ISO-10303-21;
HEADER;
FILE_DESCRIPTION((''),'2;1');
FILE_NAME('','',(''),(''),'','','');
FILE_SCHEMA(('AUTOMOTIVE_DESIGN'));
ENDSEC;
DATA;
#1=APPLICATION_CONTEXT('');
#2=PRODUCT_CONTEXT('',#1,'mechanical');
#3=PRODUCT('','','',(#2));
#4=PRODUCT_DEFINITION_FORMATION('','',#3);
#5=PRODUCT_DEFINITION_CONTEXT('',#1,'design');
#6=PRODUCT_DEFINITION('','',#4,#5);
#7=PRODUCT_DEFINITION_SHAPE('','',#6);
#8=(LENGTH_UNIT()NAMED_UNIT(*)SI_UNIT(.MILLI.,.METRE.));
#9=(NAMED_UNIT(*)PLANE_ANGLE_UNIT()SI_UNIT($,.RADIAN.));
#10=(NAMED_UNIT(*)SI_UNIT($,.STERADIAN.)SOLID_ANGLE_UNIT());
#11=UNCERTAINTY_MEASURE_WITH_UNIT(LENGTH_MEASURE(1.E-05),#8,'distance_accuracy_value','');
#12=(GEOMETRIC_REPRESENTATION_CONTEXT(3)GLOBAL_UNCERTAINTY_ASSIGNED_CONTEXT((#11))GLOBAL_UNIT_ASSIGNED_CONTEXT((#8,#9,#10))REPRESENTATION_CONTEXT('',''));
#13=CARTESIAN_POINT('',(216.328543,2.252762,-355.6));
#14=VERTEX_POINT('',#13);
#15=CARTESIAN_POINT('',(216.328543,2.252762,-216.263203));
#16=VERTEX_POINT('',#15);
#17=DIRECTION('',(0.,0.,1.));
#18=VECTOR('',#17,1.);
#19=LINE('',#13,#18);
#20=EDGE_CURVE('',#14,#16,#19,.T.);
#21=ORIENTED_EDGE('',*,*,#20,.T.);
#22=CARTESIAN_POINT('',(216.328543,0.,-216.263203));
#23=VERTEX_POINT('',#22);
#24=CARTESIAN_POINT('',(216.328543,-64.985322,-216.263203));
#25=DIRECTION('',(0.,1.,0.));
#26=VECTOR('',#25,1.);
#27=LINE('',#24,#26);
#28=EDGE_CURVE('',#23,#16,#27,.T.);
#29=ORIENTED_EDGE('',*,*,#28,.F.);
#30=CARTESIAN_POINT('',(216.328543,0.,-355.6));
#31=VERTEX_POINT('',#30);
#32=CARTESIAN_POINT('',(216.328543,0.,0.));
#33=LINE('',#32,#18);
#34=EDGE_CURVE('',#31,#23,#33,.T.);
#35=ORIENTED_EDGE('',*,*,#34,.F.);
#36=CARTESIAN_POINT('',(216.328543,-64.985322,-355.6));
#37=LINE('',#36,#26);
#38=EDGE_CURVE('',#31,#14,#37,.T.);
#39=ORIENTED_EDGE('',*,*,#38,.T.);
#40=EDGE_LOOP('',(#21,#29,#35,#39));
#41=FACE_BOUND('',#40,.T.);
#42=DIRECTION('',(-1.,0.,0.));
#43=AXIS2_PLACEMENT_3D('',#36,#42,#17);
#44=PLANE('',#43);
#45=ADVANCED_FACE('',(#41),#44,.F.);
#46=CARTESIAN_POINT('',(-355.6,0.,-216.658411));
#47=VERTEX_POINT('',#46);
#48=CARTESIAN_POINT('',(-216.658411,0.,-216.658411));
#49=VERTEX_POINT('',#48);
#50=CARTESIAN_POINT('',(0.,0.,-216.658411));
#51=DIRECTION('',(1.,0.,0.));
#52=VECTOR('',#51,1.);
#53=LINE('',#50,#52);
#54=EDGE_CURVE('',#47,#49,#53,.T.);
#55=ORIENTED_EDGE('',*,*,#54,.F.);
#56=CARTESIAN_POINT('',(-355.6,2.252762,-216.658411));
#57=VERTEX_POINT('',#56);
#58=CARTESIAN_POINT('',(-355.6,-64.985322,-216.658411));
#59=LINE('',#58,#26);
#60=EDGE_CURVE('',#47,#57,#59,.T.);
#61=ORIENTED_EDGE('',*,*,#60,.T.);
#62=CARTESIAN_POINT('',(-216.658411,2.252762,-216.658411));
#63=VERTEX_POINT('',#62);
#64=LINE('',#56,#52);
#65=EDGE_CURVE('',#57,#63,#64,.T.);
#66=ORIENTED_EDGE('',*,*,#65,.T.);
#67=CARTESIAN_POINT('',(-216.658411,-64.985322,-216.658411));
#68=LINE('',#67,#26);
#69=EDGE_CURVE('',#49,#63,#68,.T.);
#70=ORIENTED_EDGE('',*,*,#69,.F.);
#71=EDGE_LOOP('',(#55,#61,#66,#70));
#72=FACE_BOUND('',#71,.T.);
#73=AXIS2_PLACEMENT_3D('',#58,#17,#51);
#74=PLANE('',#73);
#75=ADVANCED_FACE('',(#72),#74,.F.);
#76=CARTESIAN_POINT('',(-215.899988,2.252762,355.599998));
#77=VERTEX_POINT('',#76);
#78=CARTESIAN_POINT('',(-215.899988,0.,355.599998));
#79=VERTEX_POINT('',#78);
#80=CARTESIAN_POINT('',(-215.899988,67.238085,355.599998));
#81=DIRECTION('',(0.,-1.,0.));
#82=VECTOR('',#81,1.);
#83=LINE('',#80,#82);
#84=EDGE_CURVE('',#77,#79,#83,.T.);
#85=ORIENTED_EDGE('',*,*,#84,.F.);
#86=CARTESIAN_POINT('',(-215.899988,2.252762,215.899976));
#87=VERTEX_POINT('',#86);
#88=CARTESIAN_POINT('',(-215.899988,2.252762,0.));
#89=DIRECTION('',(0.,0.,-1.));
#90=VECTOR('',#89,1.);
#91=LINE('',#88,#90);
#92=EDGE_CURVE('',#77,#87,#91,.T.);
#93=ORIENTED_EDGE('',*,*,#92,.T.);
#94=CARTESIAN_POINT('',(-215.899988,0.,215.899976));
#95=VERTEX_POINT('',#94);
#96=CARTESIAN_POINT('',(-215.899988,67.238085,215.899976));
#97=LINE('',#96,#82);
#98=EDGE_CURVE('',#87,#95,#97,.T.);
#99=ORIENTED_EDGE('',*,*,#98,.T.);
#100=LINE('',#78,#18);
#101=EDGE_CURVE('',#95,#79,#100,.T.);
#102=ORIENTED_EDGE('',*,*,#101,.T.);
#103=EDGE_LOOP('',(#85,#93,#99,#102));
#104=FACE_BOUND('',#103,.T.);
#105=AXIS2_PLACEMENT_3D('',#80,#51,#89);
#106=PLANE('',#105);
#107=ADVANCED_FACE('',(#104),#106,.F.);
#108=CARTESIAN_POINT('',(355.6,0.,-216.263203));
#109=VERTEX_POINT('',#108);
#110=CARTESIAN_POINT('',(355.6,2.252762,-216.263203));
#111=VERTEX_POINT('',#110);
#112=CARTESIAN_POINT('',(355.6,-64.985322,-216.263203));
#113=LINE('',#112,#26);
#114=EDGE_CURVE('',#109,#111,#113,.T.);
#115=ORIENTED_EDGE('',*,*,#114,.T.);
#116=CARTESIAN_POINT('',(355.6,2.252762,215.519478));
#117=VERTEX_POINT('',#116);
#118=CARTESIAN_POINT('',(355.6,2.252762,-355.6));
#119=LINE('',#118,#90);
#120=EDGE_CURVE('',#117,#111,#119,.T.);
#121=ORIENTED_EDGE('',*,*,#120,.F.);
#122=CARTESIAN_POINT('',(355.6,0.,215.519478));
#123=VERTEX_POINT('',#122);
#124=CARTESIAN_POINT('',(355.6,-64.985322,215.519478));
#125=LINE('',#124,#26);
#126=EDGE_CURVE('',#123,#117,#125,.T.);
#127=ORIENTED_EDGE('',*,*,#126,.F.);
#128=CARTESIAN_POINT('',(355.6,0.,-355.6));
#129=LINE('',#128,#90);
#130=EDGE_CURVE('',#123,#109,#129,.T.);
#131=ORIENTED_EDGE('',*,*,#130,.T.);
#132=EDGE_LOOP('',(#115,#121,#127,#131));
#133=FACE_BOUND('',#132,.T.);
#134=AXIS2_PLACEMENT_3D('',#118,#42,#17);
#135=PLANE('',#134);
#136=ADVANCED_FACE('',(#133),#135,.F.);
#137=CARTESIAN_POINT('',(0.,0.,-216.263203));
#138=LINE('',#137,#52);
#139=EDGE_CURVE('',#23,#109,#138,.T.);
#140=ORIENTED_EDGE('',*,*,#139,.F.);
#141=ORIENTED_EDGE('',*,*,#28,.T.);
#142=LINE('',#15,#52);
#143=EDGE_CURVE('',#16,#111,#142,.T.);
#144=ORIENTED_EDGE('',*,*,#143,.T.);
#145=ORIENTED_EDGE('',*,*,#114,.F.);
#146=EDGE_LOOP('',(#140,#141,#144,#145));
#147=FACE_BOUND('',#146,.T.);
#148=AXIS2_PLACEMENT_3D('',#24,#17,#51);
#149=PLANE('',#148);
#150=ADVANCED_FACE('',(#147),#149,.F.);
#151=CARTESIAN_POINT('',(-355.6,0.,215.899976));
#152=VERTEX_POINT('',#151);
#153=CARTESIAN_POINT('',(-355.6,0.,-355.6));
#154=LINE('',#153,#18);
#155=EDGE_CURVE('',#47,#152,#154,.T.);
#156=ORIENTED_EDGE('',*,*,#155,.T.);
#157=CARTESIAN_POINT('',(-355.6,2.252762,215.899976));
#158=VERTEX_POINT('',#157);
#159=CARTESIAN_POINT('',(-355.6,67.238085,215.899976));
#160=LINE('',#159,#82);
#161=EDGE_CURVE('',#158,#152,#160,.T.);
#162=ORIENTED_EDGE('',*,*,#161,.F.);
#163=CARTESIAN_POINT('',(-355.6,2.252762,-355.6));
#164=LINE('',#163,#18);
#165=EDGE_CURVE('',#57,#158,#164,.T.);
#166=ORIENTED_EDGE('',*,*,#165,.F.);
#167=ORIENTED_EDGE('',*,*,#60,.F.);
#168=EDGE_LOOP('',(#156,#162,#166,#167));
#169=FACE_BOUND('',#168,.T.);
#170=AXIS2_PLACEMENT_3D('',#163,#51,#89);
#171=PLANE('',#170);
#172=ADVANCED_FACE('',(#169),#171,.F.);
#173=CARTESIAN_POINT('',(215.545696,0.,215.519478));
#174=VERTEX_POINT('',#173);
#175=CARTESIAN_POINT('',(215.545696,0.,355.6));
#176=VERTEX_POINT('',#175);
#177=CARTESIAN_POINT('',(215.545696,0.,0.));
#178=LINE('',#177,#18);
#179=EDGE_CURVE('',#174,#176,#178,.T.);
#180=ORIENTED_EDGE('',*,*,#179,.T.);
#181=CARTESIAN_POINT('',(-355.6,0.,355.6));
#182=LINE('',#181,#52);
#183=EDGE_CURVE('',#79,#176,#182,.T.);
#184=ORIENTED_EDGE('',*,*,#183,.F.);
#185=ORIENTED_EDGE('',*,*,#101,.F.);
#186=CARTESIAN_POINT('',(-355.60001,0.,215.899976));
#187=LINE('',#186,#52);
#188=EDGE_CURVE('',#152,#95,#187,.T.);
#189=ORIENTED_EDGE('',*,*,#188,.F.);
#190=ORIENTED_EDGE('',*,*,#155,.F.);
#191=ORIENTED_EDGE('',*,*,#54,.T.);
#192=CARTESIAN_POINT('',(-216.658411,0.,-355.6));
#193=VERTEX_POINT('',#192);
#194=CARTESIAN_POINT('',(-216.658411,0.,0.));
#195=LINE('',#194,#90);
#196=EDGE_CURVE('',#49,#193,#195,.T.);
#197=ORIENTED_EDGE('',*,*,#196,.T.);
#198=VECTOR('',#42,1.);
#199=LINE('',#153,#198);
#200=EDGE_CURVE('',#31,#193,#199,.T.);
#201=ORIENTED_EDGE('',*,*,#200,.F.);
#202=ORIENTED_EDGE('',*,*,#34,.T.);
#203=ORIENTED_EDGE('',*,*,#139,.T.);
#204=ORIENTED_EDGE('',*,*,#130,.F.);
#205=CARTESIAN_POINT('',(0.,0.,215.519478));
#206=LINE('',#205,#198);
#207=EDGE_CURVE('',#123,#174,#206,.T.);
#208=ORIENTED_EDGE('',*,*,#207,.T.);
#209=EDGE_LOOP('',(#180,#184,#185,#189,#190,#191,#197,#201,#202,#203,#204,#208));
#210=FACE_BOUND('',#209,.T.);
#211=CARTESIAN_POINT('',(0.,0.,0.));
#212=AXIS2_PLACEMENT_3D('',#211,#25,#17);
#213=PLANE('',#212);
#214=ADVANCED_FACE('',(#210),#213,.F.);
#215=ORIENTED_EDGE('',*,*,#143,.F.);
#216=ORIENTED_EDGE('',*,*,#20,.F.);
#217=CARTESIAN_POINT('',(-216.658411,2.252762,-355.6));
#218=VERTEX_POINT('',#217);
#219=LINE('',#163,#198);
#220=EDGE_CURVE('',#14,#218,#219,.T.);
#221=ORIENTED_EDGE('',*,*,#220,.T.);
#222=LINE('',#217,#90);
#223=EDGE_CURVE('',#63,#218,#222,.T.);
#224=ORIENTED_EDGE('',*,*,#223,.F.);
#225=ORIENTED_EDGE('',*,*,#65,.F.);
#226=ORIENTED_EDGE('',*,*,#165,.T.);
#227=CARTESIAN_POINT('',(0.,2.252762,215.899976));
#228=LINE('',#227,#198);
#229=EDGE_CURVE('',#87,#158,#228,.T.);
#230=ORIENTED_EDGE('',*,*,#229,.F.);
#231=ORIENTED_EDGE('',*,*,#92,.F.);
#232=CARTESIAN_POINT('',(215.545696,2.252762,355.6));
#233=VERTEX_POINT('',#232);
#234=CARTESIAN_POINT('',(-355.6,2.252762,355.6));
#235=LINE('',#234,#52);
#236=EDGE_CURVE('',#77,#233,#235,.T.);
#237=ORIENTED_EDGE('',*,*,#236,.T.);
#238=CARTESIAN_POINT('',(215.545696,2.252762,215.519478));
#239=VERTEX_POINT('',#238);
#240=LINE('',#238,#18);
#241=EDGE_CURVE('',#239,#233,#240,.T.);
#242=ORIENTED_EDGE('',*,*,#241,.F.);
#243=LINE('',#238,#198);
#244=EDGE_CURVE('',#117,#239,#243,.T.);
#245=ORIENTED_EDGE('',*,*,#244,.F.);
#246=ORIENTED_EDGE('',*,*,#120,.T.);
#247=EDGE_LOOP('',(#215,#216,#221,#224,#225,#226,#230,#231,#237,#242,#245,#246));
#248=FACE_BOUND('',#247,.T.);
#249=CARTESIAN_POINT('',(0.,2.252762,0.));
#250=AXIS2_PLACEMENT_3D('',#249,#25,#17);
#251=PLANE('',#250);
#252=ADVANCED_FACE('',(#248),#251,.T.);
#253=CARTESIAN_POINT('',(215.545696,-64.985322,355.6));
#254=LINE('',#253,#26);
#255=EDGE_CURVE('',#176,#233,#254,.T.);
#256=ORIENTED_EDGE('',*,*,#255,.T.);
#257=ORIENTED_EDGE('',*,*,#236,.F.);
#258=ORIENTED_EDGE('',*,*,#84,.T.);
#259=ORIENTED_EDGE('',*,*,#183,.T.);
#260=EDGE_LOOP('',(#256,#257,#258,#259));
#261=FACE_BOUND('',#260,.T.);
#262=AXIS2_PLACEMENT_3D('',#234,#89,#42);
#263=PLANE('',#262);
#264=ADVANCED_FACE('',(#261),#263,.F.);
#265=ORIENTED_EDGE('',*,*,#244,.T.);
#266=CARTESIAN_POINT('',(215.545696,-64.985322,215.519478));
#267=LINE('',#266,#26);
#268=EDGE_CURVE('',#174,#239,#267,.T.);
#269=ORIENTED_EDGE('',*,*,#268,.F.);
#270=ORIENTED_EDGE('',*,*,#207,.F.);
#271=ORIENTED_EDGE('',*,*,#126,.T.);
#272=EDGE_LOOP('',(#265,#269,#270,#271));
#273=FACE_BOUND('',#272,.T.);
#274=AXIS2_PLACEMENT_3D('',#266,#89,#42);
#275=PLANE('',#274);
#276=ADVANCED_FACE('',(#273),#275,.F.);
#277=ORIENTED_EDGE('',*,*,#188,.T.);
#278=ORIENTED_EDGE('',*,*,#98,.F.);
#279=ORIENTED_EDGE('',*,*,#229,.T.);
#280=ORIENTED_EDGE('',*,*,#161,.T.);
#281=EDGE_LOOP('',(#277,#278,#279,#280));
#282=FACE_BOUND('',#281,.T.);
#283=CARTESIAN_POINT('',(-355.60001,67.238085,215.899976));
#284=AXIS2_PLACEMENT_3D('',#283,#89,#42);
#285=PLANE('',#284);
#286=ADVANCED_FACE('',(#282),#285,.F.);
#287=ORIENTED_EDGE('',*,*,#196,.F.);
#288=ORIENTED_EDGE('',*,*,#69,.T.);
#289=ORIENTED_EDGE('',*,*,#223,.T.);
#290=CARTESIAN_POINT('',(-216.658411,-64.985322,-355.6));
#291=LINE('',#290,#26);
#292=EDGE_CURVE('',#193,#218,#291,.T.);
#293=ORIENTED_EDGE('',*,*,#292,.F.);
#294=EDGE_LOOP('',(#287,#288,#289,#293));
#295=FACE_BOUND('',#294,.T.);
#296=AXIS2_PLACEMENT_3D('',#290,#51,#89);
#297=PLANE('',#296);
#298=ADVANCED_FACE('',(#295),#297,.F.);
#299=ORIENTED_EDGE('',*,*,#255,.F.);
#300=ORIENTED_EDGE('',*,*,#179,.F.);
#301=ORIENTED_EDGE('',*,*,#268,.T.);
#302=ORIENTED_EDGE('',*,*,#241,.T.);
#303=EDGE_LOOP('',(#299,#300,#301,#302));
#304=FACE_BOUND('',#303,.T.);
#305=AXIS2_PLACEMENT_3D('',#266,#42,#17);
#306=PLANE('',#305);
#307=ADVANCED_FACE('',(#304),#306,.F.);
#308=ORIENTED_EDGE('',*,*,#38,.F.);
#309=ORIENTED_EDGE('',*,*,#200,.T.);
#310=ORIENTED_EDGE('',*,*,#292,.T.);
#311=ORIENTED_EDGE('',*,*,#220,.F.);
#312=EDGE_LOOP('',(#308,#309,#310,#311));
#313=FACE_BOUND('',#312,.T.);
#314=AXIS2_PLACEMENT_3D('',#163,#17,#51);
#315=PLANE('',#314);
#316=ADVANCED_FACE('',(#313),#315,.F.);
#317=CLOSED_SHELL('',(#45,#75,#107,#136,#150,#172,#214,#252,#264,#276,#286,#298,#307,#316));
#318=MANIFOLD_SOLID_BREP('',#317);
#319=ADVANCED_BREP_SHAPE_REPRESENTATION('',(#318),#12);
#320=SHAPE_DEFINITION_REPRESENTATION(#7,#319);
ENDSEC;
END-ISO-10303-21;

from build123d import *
from OCP.BRepAlgoAPI import BRepAlgoAPI_Cut
from OCP.TopTools import TopTools_ListOfShape

# Parameters (mm, degrees)
SKETCH1_W           = 711.2
SKETCH1_H           = 711.2
BOSS_EXTRUDE1_DEPTH = 2.252762246
SKETCH2_W           = 139.700021816
SKETCH2_H           = 139.700021816
CUT_EXTRUDE2_DEPTH  = 67.238084533
SKETCH3_W           = 140.054303581
SKETCH3_H           = 140.080522497
CUT_EXTRUDE3_DEPTH  = 67.238084533
SKETCH4_W           = 138.94158885
SKETCH4_H           = 138.94158885
CUT_EXTRUDE4_DEPTH  = 67.238084533
SKETCH5_W           = 139.27145682
SKETCH5_H           = 139.336797366
CUT_EXTRUDE5_DEPTH  = 67.238084533


with BuildPart() as part:
    # Sketch1 → Boss-Extrude1 (new body)
    with BuildSketch(Plane(origin=(0, 0, 0), x_dir=(1, 0, 0), z_dir=(0, 1, 0))):
        Rectangle(SKETCH1_W, SKETCH1_H)
    extrude(amount=BOSS_EXTRUDE1_DEPTH)


with BuildPart() as cut_extrude2_tool:
    # Sketch2 → Cut-Extrude2 (new body)
    with BuildSketch(Plane.XZ):
        with Locations((-285.749998801, 285.749986662)):
            Rectangle(SKETCH2_W, SKETCH2_H)
    extrude(amount=-CUT_EXTRUDE2_DEPTH)


with BuildPart() as part_1:
    add(part.part)

    # Cut-Extrude2: cut by cut_extrude2_tool, with a tolerance
    cut_extrude2_stock = TopTools_ListOfShape()
    cut_extrude2_stock.Append(part_1.part.wrapped)
    cut_extrude2_tools = TopTools_ListOfShape()
    cut_extrude2_tools.Append(cut_extrude2_tool.part.wrapped)
    cut_extrude2_cut = BRepAlgoAPI_Cut()
    cut_extrude2_cut.SetArguments(cut_extrude2_stock)
    cut_extrude2_cut.SetTools(cut_extrude2_tools)
    cut_extrude2_cut.SetFuzzyValue(0.00001)
    cut_extrude2_cut.Build()
    add(Compound.cast(cut_extrude2_cut.Shape()).solids(), mode=Mode.REPLACE)

    # Sketch3 → Cut-Extrude3 (cut)
    with BuildSketch(Plane(origin=(0, 2.252762246, 0), x_dir=(1, 0, 0), z_dir=(0, 1, 0))):
        with Locations((285.57284821, -285.559738752)):
            Rectangle(SKETCH3_W, SKETCH3_H)
    extrude(amount=-CUT_EXTRUDE3_DEPTH, mode=Mode.SUBTRACT)

    # Sketch4 → Cut-Extrude4 (cut)
    with BuildSketch(Plane(origin=(0, 2.252762246, 0), x_dir=(1, 0, 0), z_dir=(0, 1, 0))):
        with Locations((-286.129205575, 286.129205575)):
            Rectangle(SKETCH4_W, SKETCH4_H)
    extrude(amount=-CUT_EXTRUDE4_DEPTH, mode=Mode.SUBTRACT)

    # Sketch5 → Cut-Extrude5 (cut)
    with BuildSketch(Plane(origin=(0, 2.252762246, 0), x_dir=(1, 0, 0), z_dir=(0, 1, 0))):
        with Locations((285.96427159, 285.931601317)):
            Rectangle(SKETCH5_W, SKETCH5_H)
    extrude(amount=-CUT_EXTRUDE5_DEPTH, mode=Mode.SUBTRACT)


solid = part_1.part
